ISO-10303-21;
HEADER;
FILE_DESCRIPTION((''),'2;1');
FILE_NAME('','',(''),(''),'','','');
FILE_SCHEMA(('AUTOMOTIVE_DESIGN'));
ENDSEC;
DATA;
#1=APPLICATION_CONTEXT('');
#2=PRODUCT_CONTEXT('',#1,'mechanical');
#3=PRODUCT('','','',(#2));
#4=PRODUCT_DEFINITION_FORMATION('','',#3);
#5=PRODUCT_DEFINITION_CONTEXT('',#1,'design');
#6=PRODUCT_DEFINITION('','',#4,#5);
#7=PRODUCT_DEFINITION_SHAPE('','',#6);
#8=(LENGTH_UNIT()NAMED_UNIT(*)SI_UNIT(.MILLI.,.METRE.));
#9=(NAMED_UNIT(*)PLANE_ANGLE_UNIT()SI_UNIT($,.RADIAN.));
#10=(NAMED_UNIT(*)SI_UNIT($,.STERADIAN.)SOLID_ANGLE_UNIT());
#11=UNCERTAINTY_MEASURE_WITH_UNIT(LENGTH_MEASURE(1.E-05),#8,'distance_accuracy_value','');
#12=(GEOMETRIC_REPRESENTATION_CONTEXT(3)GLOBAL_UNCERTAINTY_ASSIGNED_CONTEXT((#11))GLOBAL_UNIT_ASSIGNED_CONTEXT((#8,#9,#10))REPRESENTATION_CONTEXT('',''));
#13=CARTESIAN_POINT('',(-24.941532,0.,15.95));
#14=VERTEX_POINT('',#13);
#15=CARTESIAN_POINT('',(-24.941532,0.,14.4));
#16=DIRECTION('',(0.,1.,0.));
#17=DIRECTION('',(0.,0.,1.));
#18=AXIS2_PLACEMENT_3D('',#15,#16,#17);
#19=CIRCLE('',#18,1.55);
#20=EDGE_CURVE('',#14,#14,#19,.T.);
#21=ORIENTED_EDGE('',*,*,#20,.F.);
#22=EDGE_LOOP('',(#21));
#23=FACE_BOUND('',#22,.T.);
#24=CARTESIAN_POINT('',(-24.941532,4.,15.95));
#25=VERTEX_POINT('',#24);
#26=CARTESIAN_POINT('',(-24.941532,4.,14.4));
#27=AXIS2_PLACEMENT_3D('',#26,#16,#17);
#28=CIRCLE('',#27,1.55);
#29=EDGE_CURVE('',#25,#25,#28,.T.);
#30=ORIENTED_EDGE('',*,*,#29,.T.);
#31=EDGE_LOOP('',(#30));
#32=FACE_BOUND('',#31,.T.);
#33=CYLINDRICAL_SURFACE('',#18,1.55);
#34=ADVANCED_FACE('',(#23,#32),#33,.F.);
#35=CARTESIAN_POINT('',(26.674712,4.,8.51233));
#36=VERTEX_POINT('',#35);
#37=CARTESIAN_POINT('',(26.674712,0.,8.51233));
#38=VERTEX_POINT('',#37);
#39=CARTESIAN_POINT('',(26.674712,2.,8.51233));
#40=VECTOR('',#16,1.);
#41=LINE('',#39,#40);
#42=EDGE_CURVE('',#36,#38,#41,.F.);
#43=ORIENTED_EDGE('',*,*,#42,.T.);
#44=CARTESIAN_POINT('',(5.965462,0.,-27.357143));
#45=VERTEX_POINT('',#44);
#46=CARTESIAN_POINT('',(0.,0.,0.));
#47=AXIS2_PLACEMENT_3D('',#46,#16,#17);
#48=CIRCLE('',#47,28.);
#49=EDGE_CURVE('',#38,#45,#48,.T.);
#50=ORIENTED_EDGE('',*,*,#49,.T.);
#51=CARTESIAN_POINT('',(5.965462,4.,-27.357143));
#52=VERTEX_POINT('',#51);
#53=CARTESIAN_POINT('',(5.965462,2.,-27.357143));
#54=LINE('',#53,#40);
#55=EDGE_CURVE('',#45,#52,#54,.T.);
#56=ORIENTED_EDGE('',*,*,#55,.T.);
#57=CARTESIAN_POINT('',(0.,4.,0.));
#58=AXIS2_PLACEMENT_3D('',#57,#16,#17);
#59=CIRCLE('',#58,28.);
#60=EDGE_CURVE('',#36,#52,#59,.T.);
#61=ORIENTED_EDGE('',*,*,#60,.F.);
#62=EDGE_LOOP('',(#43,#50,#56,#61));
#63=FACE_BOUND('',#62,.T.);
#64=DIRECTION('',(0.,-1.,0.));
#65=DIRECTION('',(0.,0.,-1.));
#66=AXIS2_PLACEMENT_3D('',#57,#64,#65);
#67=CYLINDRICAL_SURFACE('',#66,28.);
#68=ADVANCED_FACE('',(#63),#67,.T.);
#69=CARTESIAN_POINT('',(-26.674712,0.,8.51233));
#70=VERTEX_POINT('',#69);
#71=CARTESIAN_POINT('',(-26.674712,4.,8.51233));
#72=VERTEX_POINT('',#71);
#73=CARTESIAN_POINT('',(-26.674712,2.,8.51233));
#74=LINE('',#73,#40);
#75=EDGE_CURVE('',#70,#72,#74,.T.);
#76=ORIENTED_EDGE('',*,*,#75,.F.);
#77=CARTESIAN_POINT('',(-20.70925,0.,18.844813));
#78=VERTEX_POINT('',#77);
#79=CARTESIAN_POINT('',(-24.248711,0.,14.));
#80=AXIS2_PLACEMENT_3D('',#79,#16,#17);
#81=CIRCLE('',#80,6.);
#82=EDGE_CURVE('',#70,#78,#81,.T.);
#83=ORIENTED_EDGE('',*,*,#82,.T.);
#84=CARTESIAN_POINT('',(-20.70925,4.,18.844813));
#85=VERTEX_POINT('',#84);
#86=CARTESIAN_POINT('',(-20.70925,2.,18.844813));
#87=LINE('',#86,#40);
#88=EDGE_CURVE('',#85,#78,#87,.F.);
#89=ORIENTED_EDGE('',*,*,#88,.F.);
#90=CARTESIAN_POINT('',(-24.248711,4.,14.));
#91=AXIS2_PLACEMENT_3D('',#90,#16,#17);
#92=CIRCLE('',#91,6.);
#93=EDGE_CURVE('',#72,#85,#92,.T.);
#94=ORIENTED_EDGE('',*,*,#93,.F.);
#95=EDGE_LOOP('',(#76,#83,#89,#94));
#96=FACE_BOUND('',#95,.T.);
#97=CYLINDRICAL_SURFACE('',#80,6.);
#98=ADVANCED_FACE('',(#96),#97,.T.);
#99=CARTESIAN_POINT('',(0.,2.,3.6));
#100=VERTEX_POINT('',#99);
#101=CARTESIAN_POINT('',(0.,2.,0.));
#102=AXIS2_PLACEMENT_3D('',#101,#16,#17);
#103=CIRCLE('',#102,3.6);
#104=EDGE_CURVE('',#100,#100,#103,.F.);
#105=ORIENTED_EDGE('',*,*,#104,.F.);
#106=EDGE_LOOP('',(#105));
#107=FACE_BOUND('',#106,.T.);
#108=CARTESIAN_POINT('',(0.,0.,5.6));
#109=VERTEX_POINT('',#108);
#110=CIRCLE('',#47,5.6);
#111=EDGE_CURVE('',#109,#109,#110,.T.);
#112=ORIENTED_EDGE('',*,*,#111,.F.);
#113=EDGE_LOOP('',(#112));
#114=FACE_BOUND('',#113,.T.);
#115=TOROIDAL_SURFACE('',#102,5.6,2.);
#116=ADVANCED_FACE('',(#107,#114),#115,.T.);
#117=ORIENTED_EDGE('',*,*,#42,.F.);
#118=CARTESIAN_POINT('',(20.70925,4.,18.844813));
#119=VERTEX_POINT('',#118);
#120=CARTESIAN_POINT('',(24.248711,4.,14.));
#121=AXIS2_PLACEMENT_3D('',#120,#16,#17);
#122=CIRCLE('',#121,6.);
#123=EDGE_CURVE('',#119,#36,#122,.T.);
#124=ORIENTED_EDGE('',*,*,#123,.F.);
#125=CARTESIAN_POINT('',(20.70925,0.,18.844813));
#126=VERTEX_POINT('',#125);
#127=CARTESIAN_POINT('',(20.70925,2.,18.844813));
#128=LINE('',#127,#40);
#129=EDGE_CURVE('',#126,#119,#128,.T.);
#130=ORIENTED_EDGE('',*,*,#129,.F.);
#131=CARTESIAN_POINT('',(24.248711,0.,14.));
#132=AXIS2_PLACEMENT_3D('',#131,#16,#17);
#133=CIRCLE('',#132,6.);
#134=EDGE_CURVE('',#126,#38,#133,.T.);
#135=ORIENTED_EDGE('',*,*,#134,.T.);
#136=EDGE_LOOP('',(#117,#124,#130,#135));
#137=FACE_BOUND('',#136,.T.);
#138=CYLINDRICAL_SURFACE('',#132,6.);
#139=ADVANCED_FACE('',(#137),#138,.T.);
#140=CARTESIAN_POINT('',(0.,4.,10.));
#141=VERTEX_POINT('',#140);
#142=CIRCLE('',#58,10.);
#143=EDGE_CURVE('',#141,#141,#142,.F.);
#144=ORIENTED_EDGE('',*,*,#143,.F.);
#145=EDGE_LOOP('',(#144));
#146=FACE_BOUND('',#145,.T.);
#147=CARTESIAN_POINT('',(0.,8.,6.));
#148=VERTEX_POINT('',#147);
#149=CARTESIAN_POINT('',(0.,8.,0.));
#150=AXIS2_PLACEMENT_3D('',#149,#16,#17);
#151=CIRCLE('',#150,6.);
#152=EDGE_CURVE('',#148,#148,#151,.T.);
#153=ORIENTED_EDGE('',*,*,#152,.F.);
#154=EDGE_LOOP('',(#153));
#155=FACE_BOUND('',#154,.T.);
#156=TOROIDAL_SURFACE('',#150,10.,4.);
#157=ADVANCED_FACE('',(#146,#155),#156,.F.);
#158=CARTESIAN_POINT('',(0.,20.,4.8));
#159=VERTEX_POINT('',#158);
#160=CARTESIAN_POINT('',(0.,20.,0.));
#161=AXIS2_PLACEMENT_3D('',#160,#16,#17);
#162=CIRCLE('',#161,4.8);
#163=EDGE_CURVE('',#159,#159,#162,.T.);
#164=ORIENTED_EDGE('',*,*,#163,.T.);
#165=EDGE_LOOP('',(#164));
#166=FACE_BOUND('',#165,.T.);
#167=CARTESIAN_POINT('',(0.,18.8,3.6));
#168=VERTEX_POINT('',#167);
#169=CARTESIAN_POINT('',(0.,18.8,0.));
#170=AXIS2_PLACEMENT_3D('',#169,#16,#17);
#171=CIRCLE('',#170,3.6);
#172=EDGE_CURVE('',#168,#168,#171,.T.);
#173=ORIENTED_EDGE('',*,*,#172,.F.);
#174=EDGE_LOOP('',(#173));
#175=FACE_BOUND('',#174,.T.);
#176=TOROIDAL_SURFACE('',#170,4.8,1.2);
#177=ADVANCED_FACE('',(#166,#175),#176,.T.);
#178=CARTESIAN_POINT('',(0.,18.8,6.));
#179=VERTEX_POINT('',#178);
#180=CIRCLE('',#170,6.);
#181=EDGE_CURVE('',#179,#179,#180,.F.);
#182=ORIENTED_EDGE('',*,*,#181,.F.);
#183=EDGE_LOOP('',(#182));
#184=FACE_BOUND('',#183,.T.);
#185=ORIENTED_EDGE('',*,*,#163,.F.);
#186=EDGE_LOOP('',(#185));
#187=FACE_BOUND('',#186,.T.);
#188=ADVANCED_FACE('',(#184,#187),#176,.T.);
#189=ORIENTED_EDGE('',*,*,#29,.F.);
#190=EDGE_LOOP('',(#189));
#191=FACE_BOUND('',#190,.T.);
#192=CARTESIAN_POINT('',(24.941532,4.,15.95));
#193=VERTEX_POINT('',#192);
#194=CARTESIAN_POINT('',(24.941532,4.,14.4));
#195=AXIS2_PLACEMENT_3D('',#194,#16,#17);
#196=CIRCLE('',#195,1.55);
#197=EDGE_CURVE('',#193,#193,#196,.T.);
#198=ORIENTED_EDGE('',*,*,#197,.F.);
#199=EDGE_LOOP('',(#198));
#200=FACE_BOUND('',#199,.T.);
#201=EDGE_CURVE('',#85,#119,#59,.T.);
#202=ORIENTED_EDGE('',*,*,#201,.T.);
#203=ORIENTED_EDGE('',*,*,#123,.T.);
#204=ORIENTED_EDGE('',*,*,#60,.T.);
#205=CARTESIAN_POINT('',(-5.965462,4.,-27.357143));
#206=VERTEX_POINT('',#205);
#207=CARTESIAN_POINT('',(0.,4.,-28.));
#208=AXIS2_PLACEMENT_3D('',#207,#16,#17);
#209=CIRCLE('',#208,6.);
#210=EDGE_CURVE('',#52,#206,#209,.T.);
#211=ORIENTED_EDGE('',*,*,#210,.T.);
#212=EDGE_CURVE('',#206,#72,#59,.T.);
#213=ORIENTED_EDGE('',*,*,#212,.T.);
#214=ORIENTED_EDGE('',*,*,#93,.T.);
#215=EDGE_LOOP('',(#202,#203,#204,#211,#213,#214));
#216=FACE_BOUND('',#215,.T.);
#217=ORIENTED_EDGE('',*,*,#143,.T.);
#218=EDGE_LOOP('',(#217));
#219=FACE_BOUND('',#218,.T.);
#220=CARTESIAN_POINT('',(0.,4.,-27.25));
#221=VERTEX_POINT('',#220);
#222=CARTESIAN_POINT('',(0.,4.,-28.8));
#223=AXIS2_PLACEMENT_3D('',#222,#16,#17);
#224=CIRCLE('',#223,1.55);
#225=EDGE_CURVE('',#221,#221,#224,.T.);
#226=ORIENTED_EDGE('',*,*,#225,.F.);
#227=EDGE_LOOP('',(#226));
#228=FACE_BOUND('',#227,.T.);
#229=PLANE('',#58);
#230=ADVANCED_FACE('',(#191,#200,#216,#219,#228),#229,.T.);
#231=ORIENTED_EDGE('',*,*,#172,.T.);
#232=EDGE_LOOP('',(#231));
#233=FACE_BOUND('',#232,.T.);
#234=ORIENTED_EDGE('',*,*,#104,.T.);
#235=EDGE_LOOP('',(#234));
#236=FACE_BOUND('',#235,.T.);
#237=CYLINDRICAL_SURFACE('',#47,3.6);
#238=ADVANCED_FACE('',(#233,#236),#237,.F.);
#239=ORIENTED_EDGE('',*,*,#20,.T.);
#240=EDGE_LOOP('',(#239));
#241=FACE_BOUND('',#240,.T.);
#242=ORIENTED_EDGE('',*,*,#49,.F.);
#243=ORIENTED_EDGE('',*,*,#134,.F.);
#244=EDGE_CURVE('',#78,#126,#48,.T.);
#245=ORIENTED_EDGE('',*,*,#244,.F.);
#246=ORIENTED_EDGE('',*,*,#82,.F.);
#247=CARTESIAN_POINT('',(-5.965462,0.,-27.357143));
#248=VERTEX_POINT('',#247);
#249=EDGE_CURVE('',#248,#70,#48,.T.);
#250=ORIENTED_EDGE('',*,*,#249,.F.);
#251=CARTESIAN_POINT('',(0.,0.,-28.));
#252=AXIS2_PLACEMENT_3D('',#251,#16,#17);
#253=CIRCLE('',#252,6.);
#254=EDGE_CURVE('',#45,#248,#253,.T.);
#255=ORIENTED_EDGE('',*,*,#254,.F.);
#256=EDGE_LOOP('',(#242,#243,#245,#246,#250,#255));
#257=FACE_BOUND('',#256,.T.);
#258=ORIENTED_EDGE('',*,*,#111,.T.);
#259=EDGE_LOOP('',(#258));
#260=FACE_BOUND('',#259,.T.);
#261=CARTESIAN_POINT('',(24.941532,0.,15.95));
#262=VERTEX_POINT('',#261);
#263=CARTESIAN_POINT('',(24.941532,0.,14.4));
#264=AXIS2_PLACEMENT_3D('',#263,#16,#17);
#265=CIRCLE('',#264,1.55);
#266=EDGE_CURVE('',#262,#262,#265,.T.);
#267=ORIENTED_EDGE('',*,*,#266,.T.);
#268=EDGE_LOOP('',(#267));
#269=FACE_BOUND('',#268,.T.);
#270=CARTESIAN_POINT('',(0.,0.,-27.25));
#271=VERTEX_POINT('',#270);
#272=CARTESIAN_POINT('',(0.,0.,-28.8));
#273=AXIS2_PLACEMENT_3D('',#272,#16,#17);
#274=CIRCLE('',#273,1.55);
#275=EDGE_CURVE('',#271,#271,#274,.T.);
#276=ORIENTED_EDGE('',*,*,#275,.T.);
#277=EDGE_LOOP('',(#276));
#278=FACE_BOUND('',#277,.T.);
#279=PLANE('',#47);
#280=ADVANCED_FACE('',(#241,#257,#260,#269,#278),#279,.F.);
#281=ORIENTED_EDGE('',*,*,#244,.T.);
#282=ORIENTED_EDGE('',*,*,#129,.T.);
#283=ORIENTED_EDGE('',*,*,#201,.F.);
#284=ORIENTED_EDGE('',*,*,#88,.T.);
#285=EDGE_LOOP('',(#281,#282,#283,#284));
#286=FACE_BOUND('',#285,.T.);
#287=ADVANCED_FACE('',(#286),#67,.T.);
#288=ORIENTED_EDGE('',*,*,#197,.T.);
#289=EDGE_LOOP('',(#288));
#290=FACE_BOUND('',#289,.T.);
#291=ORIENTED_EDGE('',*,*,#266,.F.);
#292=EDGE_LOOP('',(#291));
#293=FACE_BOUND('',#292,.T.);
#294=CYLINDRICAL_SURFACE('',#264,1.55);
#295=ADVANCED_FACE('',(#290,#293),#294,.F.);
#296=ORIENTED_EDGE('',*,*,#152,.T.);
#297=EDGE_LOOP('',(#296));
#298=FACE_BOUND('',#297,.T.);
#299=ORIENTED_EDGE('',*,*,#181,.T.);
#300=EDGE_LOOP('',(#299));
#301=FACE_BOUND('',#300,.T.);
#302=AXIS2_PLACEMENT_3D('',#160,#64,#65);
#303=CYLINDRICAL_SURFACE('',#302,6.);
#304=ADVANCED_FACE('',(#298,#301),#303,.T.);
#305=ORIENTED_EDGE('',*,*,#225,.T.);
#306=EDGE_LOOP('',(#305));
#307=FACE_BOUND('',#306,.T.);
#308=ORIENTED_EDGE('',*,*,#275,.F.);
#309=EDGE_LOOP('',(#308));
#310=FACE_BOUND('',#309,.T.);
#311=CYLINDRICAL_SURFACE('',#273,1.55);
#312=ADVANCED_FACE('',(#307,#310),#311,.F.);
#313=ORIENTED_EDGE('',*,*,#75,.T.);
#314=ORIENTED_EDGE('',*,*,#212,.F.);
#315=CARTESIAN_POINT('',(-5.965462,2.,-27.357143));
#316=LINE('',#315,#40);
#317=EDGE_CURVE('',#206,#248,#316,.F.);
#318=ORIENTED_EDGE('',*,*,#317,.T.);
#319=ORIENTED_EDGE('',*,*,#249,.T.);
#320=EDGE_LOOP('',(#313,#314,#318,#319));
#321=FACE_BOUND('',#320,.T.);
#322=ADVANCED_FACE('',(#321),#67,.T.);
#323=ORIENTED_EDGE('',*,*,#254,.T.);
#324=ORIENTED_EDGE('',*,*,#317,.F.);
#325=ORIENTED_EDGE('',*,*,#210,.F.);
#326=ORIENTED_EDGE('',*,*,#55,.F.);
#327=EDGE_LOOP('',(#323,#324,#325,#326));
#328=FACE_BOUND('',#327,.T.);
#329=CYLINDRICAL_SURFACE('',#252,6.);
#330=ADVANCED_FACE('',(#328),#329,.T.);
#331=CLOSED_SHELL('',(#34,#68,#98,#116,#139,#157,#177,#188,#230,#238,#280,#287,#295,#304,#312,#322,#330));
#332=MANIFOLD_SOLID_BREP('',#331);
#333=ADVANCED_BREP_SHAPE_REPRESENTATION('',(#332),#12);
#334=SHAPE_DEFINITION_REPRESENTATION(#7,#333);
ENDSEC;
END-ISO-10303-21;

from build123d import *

# Parameters (mm, degrees)
SKETCH1_R           = 28
BOSS_EXTRUDE1_DEPTH = 4
SKETCH2_R           = 6
BOSS_EXTRUDE2_DEPTH = 4
SKETCH3_R           = 1.55
CUT_EXTRUDE1_DEPTH  = 46.683525867
SKETCH4_R           = 3.6
CUT_EXTRUDE2_DEPTH  = 46.683525867
BOSS_EXTRUDE3_START = 16
SKETCH5_R           = 6
SKETCH5_R_2         = 3.6
BOSS_EXTRUDE3_DEPTH = 16
FILLET1_R           = 4
FILLET2_R           = 1.2
FILLET3_R           = 2


with BuildPart() as part:
    # Sketch1 → Boss-Extrude1 (new body)
    with BuildSketch(Plane(origin=(0, 0, 0), x_dir=(1, 0, 0), z_dir=(0, 1, 0))):
        with Locations(Location((0, 0, 0), (0, 0, 270))):
            Circle(SKETCH1_R)
    extrude(amount=BOSS_EXTRUDE1_DEPTH)

    # Sketch2 → Boss-Extrude2 (add)
    with BuildSketch(Plane(origin=(0, 4, 0), x_dir=(1, 0, 0), z_dir=(0, 1, 0))):
        with Locations((0, 28)):
            Circle(SKETCH2_R)
        with Locations((24.248711306, -14)):
            Circle(SKETCH2_R)
        with Locations((-24.248711306, -14)):
            Circle(SKETCH2_R)
    extrude(amount=-BOSS_EXTRUDE2_DEPTH)

    # Sketch3 → Cut-Extrude1 (cut, through all)
    with BuildSketch(Plane(origin=(0, 4, 0), x_dir=(1, 0, 0), z_dir=(0, 1, 0))):
        with Locations(Location((0, 28.8, 0), (0, 0, 270))):
            Circle(SKETCH3_R)
        with Locations(Location((24.941531629, -14.4, 0), (0, 0, 270))):
            Circle(SKETCH3_R)
        with Locations(Location((-24.941531629, -14.4, 0), (0, 0, 270))):
            Circle(SKETCH3_R)
    extrude(amount=-CUT_EXTRUDE1_DEPTH, mode=Mode.SUBTRACT)

    # Sketch4 → Cut-Extrude2 (cut, through all)
    with BuildSketch(Plane(origin=(0, 4, 0), x_dir=(1, 0, 0), z_dir=(0, 1, 0))):
        with Locations(Location((0, 0, 0), (0, 0, 270))):
            Circle(SKETCH4_R)
    extrude(amount=-CUT_EXTRUDE2_DEPTH, mode=Mode.SUBTRACT)

    # Sketch5 → Boss-Extrude3 (add)
    with BuildSketch(Plane(origin=(0, 4, 0), x_dir=(1, 0, 0), z_dir=(0, 1, 0)).offset(BOSS_EXTRUDE3_START)):
        with Locations(Location((0, 0, 0), (0, 0, 270))):
            Circle(SKETCH5_R)
        with Locations(Location((0, 0, 0), (0, 0, 270))):
            Circle(SKETCH5_R_2, mode=Mode.SUBTRACT)
    extrude(amount=-BOSS_EXTRUDE3_DEPTH)

    # Fillet1
    fillet1_edges = [part.edges().sort_by_distance(p)[0] for p in [
        (0, 4, -6),
    ]]
    fillet(fillet1_edges, radius=FILLET1_R)

    # Fillet2
    fillet2_edges = [part.edges().sort_by_distance(p)[0] for p in [
        (0, 20, -6),
        (0, 20, -3.6),
    ]]
    fillet(fillet2_edges, radius=FILLET2_R - 0.0001)  # a hair under: the kernel refuses the full size

    # Fillet3
    fillet3_edges = [part.edges().sort_by_distance(p)[0] for p in [
        (0, 0, -3.6),
    ]]
    fillet(fillet3_edges, radius=FILLET3_R)


solid = part.part
